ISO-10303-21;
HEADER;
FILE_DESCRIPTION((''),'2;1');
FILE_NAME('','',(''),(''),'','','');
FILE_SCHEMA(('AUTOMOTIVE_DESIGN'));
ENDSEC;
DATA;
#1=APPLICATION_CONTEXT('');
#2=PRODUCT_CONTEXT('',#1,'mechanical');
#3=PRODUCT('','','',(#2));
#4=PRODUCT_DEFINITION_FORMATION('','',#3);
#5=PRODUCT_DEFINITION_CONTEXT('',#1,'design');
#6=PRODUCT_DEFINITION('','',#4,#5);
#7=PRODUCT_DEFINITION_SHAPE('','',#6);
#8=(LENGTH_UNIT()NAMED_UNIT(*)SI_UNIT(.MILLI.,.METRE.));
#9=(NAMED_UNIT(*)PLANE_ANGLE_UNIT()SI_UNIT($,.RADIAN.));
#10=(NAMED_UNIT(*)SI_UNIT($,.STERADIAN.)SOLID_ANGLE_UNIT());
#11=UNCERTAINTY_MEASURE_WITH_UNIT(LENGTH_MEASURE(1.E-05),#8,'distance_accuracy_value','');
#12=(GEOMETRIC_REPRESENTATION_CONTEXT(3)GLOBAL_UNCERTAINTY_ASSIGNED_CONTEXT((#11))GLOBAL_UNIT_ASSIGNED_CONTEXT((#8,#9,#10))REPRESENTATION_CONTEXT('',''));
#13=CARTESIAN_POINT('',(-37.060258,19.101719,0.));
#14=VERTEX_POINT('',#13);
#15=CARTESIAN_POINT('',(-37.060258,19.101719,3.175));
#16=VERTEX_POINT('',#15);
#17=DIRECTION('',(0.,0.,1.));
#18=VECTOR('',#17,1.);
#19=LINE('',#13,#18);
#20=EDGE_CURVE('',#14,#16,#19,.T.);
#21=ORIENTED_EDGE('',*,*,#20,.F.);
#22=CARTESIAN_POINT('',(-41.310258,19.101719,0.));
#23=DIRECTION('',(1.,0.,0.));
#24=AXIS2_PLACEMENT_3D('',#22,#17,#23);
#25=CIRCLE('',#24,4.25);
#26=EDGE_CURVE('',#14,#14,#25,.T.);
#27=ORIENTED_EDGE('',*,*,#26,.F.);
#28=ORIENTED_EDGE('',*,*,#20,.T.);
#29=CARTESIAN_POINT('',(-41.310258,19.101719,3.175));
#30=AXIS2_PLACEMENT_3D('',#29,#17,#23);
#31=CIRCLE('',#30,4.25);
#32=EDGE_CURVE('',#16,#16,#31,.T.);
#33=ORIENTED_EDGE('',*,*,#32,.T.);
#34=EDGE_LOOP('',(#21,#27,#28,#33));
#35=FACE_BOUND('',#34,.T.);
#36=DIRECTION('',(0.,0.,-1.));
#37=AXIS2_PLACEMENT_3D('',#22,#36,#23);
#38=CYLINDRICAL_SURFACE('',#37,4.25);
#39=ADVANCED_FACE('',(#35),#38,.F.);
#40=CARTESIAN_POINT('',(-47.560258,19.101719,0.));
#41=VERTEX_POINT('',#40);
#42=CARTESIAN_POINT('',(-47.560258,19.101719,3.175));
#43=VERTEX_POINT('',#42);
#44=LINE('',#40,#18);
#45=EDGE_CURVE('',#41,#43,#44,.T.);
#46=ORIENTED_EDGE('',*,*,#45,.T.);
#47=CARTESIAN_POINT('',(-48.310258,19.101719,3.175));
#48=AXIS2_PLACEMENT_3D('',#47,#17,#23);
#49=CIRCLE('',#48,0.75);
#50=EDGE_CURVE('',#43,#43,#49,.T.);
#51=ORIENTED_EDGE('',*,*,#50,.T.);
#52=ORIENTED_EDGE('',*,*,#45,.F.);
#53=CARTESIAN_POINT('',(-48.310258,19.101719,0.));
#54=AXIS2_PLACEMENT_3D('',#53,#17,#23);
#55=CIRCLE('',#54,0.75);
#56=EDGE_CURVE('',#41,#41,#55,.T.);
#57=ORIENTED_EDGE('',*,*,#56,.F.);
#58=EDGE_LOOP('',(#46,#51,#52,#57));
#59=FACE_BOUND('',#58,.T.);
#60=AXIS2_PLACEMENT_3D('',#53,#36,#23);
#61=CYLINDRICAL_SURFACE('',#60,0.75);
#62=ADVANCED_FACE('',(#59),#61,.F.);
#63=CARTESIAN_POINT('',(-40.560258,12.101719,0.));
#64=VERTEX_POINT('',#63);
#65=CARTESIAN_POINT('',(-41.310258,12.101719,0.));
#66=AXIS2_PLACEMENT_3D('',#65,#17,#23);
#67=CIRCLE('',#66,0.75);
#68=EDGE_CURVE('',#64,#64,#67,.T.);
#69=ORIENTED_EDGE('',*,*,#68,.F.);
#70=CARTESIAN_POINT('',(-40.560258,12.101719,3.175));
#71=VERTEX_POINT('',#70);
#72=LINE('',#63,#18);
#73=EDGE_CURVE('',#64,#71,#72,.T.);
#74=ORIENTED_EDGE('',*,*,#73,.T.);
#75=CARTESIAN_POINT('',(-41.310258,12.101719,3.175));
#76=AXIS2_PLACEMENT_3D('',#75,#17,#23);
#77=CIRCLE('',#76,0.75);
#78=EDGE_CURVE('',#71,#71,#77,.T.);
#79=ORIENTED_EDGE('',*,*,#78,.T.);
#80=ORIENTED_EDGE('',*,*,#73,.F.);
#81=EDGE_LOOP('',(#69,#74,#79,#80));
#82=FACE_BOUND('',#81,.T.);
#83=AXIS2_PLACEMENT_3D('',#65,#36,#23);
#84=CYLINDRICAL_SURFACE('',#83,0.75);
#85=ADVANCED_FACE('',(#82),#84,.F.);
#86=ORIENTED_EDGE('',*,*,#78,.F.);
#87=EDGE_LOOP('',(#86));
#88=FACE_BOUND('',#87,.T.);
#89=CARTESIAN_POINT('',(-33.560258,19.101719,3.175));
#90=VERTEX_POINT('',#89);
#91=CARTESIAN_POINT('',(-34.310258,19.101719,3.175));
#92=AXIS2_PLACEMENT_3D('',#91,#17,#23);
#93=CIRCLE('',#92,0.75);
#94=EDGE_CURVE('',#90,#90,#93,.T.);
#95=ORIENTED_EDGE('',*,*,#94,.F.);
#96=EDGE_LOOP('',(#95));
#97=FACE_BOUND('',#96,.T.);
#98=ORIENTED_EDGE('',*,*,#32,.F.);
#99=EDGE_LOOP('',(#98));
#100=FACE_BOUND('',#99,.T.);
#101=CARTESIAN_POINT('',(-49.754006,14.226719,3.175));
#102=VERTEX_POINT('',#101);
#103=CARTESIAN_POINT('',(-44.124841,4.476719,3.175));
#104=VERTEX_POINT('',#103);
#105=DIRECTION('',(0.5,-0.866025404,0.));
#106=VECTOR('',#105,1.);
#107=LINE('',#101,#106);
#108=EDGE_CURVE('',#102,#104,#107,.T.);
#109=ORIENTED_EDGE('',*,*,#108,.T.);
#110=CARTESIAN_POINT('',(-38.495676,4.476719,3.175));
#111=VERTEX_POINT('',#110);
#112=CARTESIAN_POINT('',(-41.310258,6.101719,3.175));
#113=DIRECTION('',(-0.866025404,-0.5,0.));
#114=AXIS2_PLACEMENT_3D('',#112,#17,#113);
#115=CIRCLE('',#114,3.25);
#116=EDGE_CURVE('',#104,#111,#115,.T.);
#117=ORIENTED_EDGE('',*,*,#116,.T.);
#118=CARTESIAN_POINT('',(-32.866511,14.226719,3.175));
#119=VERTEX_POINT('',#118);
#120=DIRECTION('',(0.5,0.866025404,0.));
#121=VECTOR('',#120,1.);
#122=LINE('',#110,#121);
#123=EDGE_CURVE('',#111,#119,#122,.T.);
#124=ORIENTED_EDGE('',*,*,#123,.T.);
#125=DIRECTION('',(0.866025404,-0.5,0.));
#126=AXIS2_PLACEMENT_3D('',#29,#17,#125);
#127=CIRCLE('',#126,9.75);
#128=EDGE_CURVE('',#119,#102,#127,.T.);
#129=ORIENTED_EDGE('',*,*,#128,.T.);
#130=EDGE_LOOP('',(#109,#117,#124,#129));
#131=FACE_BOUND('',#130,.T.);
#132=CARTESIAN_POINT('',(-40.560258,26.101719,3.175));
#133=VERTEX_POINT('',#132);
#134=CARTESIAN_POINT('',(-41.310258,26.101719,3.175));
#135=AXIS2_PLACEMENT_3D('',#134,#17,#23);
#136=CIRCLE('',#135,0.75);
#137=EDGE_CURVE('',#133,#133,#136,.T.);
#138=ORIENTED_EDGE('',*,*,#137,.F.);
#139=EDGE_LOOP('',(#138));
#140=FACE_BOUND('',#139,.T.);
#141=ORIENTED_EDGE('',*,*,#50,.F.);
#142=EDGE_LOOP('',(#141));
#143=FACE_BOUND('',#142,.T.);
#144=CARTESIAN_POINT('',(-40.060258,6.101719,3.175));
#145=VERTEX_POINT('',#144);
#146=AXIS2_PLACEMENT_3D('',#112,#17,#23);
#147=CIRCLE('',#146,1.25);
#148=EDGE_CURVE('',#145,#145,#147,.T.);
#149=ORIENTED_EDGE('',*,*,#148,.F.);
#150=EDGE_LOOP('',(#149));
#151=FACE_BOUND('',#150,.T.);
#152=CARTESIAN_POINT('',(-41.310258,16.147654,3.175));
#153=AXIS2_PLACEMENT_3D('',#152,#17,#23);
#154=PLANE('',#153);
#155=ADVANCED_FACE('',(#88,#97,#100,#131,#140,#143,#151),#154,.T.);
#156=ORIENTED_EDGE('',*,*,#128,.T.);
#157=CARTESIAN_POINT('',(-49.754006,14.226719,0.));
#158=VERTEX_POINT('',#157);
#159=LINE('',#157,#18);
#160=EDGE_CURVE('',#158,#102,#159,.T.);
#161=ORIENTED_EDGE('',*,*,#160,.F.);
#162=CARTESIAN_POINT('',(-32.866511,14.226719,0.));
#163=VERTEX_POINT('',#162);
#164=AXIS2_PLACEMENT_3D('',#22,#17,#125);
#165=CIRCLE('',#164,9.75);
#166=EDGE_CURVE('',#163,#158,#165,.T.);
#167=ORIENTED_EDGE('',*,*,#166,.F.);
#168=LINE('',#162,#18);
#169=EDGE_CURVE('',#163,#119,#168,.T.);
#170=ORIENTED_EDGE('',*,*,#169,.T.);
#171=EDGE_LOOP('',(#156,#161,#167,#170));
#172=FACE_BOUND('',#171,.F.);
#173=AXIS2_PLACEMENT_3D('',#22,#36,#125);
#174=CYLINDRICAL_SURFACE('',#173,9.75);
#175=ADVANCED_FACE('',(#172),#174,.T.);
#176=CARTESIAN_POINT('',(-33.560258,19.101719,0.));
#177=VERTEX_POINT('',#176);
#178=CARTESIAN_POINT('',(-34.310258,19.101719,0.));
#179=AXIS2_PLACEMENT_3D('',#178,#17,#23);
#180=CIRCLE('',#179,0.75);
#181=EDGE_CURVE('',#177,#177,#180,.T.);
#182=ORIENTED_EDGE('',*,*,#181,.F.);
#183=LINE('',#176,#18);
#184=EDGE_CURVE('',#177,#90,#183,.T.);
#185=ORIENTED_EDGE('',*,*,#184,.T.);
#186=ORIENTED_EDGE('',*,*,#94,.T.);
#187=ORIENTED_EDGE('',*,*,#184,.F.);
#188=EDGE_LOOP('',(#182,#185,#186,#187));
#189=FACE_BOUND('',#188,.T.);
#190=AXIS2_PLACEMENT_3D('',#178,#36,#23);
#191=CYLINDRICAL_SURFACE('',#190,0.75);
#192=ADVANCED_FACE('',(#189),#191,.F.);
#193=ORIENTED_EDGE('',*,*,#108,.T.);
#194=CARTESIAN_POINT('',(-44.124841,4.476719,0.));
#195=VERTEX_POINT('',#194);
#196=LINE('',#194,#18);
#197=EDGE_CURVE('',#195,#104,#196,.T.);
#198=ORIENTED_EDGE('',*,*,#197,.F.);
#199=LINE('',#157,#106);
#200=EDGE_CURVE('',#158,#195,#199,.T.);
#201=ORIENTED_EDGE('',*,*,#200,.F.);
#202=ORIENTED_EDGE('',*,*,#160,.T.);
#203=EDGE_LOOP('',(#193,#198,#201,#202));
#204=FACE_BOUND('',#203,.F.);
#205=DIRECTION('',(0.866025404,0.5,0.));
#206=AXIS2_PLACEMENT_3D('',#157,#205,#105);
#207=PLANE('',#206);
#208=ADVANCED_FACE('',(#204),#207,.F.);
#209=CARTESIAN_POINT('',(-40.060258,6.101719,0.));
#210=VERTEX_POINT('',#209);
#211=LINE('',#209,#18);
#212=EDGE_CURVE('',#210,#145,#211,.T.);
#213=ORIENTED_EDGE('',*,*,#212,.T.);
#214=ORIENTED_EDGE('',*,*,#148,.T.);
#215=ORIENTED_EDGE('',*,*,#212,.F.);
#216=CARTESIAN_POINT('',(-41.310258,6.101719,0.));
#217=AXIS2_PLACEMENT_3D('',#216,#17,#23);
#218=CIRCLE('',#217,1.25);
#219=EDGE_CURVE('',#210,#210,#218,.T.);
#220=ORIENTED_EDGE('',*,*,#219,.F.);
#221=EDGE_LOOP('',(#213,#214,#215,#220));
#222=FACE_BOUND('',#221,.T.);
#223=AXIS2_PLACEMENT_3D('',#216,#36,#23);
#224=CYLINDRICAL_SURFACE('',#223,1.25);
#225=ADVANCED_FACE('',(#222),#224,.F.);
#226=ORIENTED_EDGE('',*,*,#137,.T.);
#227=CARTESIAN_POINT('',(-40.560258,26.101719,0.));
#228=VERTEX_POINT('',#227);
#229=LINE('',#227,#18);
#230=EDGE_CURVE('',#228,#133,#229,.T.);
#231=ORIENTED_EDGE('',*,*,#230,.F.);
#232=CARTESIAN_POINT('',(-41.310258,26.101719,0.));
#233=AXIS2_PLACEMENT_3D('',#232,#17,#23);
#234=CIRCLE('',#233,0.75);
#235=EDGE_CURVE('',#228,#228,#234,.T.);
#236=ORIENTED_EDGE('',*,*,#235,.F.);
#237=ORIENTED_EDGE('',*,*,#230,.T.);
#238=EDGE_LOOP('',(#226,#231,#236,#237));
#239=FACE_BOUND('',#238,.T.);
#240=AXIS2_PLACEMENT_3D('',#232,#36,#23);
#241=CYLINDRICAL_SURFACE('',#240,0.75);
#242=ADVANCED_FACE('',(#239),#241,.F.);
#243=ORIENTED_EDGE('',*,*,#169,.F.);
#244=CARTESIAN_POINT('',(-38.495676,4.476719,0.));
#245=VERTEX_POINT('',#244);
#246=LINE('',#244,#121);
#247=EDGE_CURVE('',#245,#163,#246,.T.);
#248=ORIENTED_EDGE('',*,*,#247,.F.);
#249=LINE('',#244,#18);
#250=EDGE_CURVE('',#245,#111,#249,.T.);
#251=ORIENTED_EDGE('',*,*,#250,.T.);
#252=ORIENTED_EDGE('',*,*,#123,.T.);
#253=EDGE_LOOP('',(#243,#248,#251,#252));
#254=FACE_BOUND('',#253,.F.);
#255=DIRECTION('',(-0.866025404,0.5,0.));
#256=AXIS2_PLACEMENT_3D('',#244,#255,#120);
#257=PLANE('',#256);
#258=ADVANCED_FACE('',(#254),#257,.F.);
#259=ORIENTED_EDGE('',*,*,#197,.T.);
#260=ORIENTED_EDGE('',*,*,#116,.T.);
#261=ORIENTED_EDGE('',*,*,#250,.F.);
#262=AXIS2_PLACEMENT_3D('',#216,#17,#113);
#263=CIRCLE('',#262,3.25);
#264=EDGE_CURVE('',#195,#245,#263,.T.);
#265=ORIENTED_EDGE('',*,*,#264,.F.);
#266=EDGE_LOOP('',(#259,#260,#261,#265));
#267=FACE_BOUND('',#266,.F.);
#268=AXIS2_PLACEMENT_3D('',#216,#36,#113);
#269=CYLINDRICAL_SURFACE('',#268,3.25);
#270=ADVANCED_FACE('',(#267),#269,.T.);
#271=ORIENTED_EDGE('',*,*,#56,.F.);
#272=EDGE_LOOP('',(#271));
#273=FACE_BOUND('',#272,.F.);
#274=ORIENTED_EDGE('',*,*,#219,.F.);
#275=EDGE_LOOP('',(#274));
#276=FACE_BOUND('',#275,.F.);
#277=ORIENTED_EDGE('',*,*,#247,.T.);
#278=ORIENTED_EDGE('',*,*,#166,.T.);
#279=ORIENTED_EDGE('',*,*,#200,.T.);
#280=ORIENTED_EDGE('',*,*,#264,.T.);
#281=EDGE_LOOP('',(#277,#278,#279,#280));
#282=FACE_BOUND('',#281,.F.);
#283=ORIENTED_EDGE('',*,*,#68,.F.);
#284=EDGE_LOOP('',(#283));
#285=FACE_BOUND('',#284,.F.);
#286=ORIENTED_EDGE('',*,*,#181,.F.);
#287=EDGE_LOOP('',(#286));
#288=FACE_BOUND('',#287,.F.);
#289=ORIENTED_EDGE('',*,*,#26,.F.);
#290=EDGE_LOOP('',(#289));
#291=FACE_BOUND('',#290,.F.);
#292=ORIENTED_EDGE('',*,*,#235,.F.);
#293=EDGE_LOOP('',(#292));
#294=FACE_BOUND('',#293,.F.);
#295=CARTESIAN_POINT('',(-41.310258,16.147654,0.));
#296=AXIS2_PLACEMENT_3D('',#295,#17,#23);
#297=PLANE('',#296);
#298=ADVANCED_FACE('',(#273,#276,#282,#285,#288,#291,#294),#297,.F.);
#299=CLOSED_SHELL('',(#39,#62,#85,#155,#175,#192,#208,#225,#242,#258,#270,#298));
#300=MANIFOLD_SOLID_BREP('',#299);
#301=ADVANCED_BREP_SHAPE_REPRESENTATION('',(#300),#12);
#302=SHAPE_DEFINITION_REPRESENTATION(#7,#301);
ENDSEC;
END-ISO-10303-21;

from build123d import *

# Parameters (mm, degrees)
F0_R     = 1.25
F0_R_2   = 0.75
F0_R_3   = 4.25
F1_DEPTH = 3.175


# Not quite as in the source:
# - a length typed as a fraction of an inch, garbled in the dataset ("3 / 203.2 mm" for 3/8 in), is restored


with BuildPart() as f1:
    # F0 (on Top) → F1 (new body)
    with BuildSketch(Plane.XY):
        with BuildLine():
            Line((-38.4956756474, 4.4767191038), (-32.8665105228, 14.2267191038))
            ThreePointArc((-32.8665105228, 14.2267191038), (-41.3102582097, 28.8517191038), (-49.7540058966, 14.2267191038))
            Line((-49.7540058966, 14.2267191038), (-44.124840772, 4.4767191038))
            ThreePointArc((-44.124840772, 4.4767191038), (-41.3102582097, 2.8517191038), (-38.4956756474, 4.4767191038))
        make_face()
        with Locations((-41.3102582097, 6.1017191038)):
            Circle(F0_R, mode=Mode.SUBTRACT)
        with Locations((-41.3102582097, 12.1017191038)):
            Circle(F0_R_2, mode=Mode.SUBTRACT)
        with Locations((-48.3102582097, 19.1017191038)):
            Circle(F0_R_2, mode=Mode.SUBTRACT)
        with Locations((-41.3102582097, 19.1017191038)):
            Circle(F0_R_3, mode=Mode.SUBTRACT)
        with Locations((-34.3102582097, 19.1017191038)):
            Circle(F0_R_2, mode=Mode.SUBTRACT)
        with Locations((-41.3102582097, 26.1017191038)):
            Circle(F0_R_2, mode=Mode.SUBTRACT)
    extrude(amount=F1_DEPTH)


solid = f1.part
